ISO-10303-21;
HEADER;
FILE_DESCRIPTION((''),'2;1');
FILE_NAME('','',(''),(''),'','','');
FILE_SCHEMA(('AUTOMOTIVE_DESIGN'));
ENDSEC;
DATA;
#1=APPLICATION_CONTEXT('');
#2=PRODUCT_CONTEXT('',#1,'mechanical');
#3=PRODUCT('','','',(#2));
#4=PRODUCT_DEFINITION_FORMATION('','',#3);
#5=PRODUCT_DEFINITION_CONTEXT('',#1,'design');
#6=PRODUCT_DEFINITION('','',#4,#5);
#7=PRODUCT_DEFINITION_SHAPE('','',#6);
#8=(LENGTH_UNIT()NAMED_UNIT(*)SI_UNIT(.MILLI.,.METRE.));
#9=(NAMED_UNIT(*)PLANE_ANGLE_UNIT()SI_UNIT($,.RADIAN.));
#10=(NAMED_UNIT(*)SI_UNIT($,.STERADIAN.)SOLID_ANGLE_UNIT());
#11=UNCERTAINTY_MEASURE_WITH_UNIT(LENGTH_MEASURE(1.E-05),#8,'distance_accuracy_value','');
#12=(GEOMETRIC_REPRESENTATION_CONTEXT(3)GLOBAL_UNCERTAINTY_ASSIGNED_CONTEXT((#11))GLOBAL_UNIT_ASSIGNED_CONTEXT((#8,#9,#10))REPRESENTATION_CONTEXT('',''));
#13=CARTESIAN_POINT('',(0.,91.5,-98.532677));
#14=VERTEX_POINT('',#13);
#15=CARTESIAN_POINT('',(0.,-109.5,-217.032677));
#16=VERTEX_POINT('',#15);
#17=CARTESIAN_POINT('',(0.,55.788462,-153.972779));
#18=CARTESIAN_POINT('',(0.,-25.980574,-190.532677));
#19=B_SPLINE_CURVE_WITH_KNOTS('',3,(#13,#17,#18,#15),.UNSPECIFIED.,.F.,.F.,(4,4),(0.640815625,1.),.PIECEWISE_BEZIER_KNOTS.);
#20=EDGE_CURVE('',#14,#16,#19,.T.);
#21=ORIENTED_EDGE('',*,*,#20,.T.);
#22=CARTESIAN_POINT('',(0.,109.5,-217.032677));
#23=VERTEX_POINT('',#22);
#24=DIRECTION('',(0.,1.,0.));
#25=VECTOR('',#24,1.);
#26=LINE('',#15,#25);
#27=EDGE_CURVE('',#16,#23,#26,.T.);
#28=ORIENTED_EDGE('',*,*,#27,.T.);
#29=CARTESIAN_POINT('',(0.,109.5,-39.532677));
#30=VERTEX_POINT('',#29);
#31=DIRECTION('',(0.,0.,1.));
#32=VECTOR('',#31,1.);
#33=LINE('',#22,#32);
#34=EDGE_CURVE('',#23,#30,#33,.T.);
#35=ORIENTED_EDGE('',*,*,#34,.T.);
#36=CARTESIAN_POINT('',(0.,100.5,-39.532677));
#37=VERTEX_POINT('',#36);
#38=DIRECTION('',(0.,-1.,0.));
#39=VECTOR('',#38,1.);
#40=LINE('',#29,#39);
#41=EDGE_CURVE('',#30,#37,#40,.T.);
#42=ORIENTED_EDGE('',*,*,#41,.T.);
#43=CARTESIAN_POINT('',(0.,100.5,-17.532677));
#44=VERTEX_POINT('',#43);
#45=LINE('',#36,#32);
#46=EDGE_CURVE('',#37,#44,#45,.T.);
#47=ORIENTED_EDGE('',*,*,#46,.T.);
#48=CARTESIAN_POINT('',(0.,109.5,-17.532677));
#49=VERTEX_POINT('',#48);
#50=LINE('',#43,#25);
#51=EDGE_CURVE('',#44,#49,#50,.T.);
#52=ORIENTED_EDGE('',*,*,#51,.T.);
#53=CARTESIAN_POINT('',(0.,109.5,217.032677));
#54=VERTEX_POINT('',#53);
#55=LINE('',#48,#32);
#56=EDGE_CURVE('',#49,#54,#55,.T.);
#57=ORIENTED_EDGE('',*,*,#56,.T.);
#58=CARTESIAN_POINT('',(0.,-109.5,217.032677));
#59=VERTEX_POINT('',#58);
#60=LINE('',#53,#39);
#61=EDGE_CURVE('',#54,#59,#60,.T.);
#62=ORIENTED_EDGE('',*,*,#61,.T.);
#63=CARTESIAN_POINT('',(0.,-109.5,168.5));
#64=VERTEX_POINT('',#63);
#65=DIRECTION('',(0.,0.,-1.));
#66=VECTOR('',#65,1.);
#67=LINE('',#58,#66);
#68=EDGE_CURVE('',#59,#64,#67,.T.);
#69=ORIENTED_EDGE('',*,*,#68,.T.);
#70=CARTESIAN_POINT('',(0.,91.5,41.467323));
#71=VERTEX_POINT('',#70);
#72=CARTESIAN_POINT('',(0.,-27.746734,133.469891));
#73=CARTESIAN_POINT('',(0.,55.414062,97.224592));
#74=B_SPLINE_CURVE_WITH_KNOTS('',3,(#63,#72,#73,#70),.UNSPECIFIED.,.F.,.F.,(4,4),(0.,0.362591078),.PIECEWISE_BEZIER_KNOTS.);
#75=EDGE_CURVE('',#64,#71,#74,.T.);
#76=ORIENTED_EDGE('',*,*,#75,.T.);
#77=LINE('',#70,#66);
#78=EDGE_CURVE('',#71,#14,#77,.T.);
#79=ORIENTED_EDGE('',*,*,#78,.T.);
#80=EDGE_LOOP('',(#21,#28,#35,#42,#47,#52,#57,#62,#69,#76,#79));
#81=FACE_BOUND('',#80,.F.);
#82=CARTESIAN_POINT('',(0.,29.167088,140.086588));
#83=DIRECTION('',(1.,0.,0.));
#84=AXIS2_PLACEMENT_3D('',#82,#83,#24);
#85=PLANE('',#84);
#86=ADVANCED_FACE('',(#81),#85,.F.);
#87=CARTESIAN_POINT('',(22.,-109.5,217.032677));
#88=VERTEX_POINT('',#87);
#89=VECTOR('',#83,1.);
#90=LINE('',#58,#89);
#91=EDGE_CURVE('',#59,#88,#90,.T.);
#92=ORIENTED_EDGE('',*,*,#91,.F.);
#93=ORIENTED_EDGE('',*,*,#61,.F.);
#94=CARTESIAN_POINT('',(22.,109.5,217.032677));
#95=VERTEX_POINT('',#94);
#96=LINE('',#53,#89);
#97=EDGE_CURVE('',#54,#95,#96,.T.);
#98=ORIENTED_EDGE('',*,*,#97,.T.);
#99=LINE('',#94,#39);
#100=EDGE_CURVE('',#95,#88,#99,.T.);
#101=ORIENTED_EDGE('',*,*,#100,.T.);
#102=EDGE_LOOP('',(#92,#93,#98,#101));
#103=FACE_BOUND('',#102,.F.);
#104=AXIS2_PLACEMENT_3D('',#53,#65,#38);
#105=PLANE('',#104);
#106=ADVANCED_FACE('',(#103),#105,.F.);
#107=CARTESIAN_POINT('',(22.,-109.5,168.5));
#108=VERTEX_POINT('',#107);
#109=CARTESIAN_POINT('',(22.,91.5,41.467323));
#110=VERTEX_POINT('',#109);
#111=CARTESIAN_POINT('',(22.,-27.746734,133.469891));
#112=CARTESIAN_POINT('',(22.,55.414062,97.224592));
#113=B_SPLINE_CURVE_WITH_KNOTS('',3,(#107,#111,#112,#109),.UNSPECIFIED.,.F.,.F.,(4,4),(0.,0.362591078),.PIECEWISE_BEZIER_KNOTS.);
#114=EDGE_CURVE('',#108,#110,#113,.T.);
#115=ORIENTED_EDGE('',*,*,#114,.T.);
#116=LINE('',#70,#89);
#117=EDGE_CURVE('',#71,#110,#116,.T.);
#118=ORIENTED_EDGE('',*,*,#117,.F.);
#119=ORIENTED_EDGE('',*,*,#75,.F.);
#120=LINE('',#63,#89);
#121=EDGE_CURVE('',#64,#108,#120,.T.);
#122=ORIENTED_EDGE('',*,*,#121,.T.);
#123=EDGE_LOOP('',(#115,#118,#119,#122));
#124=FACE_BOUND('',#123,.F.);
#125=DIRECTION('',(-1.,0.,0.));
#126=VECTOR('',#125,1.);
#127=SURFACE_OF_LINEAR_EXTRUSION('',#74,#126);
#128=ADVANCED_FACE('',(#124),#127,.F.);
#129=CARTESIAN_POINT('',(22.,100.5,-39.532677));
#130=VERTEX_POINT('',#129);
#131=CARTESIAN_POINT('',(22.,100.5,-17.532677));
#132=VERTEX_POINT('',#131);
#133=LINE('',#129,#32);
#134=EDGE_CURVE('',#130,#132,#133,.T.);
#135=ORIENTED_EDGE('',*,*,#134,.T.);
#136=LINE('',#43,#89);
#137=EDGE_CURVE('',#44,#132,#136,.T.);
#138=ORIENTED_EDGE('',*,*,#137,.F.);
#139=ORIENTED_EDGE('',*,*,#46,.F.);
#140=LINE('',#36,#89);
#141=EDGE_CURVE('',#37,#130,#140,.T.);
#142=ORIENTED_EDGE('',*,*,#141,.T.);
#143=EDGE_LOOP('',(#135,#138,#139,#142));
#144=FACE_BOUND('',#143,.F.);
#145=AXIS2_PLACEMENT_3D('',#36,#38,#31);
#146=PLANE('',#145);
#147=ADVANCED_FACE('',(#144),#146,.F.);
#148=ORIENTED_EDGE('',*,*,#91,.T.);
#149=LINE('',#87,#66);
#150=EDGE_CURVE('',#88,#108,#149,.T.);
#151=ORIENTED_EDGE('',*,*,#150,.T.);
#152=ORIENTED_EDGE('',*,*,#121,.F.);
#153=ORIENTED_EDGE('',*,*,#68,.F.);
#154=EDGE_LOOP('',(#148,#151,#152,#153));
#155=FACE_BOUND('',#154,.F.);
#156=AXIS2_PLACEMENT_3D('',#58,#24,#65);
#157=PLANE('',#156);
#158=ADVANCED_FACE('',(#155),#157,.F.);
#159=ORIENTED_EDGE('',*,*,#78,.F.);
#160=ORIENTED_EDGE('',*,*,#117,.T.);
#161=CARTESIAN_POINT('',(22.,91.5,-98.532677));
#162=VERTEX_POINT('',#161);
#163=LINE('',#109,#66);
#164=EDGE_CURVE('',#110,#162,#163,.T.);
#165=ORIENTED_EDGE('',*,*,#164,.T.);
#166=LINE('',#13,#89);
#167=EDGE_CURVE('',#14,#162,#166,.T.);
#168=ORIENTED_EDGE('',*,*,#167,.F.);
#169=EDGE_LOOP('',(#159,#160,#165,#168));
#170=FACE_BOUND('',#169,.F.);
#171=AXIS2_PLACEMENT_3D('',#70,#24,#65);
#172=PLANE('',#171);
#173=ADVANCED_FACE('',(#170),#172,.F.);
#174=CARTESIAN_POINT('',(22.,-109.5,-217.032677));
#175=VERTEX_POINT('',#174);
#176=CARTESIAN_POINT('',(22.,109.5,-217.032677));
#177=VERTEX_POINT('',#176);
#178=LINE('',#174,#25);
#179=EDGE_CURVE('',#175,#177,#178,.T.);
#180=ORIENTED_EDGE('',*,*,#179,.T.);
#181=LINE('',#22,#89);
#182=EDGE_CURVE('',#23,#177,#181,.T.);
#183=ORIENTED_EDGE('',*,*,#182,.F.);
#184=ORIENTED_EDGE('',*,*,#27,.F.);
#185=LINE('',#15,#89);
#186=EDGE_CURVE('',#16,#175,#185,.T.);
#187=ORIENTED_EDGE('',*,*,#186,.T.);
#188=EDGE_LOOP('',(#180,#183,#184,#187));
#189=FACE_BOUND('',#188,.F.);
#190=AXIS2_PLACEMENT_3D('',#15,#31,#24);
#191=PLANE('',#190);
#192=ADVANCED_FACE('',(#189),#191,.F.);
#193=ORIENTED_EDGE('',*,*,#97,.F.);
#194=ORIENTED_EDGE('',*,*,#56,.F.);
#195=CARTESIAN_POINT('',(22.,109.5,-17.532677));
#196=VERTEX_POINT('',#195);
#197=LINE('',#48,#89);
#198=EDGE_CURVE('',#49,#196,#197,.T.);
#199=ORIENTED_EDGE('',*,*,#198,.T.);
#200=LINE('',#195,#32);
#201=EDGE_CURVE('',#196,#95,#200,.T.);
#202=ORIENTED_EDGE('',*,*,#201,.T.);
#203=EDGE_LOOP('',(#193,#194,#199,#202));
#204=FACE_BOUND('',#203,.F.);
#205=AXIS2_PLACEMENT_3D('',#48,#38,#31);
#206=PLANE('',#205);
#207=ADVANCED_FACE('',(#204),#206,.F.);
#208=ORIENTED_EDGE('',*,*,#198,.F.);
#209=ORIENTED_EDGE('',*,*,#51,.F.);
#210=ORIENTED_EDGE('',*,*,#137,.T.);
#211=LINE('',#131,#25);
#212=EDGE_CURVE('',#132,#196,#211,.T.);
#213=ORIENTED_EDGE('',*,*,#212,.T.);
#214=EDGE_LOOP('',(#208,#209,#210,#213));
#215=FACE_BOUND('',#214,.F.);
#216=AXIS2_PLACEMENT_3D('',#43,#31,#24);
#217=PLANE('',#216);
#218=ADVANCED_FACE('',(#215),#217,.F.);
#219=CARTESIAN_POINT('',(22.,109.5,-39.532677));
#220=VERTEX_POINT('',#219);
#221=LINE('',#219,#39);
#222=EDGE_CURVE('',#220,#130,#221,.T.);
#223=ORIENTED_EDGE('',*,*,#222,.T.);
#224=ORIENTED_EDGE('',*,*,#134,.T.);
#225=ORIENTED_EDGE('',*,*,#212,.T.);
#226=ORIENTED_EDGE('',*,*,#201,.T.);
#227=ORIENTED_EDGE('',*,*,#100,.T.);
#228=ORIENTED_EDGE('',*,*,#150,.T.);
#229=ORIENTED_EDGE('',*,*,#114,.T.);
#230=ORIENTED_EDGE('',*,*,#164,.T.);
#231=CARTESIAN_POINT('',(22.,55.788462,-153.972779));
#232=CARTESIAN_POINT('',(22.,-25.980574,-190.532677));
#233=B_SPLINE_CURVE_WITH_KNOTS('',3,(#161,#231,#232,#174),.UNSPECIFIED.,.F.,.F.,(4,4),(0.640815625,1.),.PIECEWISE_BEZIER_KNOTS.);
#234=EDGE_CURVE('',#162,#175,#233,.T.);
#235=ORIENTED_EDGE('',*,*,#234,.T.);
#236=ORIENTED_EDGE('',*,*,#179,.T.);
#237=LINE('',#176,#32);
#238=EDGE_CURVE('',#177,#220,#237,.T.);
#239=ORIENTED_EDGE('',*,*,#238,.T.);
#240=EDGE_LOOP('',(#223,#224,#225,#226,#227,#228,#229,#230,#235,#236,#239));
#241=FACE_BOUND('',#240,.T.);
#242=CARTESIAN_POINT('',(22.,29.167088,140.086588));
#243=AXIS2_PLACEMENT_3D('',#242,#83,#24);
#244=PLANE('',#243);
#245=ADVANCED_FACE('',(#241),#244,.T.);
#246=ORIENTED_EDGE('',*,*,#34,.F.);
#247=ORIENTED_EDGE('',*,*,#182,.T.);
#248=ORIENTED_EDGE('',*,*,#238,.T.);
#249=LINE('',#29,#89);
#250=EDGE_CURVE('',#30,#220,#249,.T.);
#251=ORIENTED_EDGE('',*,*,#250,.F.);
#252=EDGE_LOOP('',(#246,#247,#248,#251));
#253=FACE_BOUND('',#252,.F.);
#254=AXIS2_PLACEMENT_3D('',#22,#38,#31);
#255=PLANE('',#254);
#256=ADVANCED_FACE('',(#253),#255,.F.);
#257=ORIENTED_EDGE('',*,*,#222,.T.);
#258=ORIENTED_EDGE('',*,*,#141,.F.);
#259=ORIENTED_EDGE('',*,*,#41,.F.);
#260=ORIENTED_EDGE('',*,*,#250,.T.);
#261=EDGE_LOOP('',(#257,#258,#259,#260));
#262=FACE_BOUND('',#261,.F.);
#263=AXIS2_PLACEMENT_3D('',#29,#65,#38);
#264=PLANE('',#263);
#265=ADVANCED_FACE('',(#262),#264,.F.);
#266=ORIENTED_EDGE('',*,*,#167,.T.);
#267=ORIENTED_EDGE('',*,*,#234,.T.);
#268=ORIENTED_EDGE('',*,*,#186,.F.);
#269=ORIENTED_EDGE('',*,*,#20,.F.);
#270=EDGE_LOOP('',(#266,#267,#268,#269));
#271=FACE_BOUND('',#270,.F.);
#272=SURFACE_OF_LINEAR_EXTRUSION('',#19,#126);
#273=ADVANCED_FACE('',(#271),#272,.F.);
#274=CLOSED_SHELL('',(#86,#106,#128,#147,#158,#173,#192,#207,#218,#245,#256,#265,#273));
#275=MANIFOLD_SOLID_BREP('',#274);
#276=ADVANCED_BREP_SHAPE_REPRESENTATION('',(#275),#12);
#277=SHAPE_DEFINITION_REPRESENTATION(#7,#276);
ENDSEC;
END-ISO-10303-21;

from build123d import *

# Parameters (mm, degrees)
F1_DEPTH = 22


with BuildPart() as f1:
    # F0 (on Right) → F1 (new body)
    with BuildSketch(Plane.YZ):
        with BuildLine():
            Line((109.5, -2.0528280745), (109.5, 217.0326773285))
            Line((109.5, 217.0326773285), (-109.5, 217.0326773285))
            Line((-109.5, 217.0326773285), (-109.5, 168.5))
            add(Edge.make_bspline(
                [(-109.5, 168.5), (-27.7467335676, 133.469891204), (55.4140619779, 97.2245921781), (91.5, 41.4673226715)],
                knots=[0, 0, 0, 0, 0.3625910784, 0.3625910784, 0.3625910784, 0.3625910784], degree=3))
            add(Edge.make_bspline(
                [(91.5, 41.4673226715), (100.2961758102, 27.8761352961), (106.2952978286, 13.1256022765), (109.5, -2.0528280745)],
                knots=[0.3625910784, 0.3625910784, 0.3625910784, 0.3625910784, 0.4509749489, 0.4509749489, 0.4509749489, 0.4509749489], degree=3))
        make_face()
        with BuildLine():
            Line((109.5, -17.5326773285), (109.5, -2.0528280745))
            add(Edge.make_bspline(
                [(91.5, 41.4673226715), (100.2961758102, 27.8761352961), (106.2952978286, 13.1256022765), (109.5, -2.0528280745)],
                knots=[0.3625910784, 0.3625910784, 0.3625910784, 0.3625910784, 0.4509749489, 0.4509749489, 0.4509749489, 0.4509749489], degree=3))
            Line((91.5, 41.4673226715), (91.5, -28.5326773285))
            Line((91.5, -28.5326773285), (91.5, -98.5326773285))
            add(Edge.make_bspline(
                [(109.5, -54.8776239379), (106.2942898962, -70.0854206268), (100.2934101345, -84.8814155055), (91.5, -98.5326773285)],
                knots=[0.5523720652, 0.5523720652, 0.5523720652, 0.5523720652, 0.640815625, 0.640815625, 0.640815625, 0.640815625], degree=3))
            Line((109.5, -54.8776239379), (109.5, -39.5326773285))
            Line((109.5, -39.5326773285), (100.5, -39.5326773285))
            Line((100.5, -39.5326773285), (100.5, -17.5326773285))
            Line((100.5, -17.5326773285), (109.5, -17.5326773285))
        make_face()
        with BuildLine():
            Line((109.5, -217.0326773285), (109.5, -54.8776239379))
            add(Edge.make_bspline(
                [(109.5, -54.8776239379), (106.2942898962, -70.0854206268), (100.2934101345, -84.8814155055), (91.5, -98.5326773285)],
                knots=[0.5523720652, 0.5523720652, 0.5523720652, 0.5523720652, 0.640815625, 0.640815625, 0.640815625, 0.640815625], degree=3))
            add(Edge.make_bspline(
                [(91.5, -98.5326773285), (55.7884622504, -153.9727790026), (-25.9805742583, -190.5326773285), (-109.5, -217.0326773285)],
                knots=[0.640815625, 0.640815625, 0.640815625, 0.640815625, 1, 1, 1, 1], degree=3))
            Line((-109.5, -217.0326773285), (109.5, -217.0326773285))
        make_face()
    extrude(amount=F1_DEPTH)


solid = f1.part
